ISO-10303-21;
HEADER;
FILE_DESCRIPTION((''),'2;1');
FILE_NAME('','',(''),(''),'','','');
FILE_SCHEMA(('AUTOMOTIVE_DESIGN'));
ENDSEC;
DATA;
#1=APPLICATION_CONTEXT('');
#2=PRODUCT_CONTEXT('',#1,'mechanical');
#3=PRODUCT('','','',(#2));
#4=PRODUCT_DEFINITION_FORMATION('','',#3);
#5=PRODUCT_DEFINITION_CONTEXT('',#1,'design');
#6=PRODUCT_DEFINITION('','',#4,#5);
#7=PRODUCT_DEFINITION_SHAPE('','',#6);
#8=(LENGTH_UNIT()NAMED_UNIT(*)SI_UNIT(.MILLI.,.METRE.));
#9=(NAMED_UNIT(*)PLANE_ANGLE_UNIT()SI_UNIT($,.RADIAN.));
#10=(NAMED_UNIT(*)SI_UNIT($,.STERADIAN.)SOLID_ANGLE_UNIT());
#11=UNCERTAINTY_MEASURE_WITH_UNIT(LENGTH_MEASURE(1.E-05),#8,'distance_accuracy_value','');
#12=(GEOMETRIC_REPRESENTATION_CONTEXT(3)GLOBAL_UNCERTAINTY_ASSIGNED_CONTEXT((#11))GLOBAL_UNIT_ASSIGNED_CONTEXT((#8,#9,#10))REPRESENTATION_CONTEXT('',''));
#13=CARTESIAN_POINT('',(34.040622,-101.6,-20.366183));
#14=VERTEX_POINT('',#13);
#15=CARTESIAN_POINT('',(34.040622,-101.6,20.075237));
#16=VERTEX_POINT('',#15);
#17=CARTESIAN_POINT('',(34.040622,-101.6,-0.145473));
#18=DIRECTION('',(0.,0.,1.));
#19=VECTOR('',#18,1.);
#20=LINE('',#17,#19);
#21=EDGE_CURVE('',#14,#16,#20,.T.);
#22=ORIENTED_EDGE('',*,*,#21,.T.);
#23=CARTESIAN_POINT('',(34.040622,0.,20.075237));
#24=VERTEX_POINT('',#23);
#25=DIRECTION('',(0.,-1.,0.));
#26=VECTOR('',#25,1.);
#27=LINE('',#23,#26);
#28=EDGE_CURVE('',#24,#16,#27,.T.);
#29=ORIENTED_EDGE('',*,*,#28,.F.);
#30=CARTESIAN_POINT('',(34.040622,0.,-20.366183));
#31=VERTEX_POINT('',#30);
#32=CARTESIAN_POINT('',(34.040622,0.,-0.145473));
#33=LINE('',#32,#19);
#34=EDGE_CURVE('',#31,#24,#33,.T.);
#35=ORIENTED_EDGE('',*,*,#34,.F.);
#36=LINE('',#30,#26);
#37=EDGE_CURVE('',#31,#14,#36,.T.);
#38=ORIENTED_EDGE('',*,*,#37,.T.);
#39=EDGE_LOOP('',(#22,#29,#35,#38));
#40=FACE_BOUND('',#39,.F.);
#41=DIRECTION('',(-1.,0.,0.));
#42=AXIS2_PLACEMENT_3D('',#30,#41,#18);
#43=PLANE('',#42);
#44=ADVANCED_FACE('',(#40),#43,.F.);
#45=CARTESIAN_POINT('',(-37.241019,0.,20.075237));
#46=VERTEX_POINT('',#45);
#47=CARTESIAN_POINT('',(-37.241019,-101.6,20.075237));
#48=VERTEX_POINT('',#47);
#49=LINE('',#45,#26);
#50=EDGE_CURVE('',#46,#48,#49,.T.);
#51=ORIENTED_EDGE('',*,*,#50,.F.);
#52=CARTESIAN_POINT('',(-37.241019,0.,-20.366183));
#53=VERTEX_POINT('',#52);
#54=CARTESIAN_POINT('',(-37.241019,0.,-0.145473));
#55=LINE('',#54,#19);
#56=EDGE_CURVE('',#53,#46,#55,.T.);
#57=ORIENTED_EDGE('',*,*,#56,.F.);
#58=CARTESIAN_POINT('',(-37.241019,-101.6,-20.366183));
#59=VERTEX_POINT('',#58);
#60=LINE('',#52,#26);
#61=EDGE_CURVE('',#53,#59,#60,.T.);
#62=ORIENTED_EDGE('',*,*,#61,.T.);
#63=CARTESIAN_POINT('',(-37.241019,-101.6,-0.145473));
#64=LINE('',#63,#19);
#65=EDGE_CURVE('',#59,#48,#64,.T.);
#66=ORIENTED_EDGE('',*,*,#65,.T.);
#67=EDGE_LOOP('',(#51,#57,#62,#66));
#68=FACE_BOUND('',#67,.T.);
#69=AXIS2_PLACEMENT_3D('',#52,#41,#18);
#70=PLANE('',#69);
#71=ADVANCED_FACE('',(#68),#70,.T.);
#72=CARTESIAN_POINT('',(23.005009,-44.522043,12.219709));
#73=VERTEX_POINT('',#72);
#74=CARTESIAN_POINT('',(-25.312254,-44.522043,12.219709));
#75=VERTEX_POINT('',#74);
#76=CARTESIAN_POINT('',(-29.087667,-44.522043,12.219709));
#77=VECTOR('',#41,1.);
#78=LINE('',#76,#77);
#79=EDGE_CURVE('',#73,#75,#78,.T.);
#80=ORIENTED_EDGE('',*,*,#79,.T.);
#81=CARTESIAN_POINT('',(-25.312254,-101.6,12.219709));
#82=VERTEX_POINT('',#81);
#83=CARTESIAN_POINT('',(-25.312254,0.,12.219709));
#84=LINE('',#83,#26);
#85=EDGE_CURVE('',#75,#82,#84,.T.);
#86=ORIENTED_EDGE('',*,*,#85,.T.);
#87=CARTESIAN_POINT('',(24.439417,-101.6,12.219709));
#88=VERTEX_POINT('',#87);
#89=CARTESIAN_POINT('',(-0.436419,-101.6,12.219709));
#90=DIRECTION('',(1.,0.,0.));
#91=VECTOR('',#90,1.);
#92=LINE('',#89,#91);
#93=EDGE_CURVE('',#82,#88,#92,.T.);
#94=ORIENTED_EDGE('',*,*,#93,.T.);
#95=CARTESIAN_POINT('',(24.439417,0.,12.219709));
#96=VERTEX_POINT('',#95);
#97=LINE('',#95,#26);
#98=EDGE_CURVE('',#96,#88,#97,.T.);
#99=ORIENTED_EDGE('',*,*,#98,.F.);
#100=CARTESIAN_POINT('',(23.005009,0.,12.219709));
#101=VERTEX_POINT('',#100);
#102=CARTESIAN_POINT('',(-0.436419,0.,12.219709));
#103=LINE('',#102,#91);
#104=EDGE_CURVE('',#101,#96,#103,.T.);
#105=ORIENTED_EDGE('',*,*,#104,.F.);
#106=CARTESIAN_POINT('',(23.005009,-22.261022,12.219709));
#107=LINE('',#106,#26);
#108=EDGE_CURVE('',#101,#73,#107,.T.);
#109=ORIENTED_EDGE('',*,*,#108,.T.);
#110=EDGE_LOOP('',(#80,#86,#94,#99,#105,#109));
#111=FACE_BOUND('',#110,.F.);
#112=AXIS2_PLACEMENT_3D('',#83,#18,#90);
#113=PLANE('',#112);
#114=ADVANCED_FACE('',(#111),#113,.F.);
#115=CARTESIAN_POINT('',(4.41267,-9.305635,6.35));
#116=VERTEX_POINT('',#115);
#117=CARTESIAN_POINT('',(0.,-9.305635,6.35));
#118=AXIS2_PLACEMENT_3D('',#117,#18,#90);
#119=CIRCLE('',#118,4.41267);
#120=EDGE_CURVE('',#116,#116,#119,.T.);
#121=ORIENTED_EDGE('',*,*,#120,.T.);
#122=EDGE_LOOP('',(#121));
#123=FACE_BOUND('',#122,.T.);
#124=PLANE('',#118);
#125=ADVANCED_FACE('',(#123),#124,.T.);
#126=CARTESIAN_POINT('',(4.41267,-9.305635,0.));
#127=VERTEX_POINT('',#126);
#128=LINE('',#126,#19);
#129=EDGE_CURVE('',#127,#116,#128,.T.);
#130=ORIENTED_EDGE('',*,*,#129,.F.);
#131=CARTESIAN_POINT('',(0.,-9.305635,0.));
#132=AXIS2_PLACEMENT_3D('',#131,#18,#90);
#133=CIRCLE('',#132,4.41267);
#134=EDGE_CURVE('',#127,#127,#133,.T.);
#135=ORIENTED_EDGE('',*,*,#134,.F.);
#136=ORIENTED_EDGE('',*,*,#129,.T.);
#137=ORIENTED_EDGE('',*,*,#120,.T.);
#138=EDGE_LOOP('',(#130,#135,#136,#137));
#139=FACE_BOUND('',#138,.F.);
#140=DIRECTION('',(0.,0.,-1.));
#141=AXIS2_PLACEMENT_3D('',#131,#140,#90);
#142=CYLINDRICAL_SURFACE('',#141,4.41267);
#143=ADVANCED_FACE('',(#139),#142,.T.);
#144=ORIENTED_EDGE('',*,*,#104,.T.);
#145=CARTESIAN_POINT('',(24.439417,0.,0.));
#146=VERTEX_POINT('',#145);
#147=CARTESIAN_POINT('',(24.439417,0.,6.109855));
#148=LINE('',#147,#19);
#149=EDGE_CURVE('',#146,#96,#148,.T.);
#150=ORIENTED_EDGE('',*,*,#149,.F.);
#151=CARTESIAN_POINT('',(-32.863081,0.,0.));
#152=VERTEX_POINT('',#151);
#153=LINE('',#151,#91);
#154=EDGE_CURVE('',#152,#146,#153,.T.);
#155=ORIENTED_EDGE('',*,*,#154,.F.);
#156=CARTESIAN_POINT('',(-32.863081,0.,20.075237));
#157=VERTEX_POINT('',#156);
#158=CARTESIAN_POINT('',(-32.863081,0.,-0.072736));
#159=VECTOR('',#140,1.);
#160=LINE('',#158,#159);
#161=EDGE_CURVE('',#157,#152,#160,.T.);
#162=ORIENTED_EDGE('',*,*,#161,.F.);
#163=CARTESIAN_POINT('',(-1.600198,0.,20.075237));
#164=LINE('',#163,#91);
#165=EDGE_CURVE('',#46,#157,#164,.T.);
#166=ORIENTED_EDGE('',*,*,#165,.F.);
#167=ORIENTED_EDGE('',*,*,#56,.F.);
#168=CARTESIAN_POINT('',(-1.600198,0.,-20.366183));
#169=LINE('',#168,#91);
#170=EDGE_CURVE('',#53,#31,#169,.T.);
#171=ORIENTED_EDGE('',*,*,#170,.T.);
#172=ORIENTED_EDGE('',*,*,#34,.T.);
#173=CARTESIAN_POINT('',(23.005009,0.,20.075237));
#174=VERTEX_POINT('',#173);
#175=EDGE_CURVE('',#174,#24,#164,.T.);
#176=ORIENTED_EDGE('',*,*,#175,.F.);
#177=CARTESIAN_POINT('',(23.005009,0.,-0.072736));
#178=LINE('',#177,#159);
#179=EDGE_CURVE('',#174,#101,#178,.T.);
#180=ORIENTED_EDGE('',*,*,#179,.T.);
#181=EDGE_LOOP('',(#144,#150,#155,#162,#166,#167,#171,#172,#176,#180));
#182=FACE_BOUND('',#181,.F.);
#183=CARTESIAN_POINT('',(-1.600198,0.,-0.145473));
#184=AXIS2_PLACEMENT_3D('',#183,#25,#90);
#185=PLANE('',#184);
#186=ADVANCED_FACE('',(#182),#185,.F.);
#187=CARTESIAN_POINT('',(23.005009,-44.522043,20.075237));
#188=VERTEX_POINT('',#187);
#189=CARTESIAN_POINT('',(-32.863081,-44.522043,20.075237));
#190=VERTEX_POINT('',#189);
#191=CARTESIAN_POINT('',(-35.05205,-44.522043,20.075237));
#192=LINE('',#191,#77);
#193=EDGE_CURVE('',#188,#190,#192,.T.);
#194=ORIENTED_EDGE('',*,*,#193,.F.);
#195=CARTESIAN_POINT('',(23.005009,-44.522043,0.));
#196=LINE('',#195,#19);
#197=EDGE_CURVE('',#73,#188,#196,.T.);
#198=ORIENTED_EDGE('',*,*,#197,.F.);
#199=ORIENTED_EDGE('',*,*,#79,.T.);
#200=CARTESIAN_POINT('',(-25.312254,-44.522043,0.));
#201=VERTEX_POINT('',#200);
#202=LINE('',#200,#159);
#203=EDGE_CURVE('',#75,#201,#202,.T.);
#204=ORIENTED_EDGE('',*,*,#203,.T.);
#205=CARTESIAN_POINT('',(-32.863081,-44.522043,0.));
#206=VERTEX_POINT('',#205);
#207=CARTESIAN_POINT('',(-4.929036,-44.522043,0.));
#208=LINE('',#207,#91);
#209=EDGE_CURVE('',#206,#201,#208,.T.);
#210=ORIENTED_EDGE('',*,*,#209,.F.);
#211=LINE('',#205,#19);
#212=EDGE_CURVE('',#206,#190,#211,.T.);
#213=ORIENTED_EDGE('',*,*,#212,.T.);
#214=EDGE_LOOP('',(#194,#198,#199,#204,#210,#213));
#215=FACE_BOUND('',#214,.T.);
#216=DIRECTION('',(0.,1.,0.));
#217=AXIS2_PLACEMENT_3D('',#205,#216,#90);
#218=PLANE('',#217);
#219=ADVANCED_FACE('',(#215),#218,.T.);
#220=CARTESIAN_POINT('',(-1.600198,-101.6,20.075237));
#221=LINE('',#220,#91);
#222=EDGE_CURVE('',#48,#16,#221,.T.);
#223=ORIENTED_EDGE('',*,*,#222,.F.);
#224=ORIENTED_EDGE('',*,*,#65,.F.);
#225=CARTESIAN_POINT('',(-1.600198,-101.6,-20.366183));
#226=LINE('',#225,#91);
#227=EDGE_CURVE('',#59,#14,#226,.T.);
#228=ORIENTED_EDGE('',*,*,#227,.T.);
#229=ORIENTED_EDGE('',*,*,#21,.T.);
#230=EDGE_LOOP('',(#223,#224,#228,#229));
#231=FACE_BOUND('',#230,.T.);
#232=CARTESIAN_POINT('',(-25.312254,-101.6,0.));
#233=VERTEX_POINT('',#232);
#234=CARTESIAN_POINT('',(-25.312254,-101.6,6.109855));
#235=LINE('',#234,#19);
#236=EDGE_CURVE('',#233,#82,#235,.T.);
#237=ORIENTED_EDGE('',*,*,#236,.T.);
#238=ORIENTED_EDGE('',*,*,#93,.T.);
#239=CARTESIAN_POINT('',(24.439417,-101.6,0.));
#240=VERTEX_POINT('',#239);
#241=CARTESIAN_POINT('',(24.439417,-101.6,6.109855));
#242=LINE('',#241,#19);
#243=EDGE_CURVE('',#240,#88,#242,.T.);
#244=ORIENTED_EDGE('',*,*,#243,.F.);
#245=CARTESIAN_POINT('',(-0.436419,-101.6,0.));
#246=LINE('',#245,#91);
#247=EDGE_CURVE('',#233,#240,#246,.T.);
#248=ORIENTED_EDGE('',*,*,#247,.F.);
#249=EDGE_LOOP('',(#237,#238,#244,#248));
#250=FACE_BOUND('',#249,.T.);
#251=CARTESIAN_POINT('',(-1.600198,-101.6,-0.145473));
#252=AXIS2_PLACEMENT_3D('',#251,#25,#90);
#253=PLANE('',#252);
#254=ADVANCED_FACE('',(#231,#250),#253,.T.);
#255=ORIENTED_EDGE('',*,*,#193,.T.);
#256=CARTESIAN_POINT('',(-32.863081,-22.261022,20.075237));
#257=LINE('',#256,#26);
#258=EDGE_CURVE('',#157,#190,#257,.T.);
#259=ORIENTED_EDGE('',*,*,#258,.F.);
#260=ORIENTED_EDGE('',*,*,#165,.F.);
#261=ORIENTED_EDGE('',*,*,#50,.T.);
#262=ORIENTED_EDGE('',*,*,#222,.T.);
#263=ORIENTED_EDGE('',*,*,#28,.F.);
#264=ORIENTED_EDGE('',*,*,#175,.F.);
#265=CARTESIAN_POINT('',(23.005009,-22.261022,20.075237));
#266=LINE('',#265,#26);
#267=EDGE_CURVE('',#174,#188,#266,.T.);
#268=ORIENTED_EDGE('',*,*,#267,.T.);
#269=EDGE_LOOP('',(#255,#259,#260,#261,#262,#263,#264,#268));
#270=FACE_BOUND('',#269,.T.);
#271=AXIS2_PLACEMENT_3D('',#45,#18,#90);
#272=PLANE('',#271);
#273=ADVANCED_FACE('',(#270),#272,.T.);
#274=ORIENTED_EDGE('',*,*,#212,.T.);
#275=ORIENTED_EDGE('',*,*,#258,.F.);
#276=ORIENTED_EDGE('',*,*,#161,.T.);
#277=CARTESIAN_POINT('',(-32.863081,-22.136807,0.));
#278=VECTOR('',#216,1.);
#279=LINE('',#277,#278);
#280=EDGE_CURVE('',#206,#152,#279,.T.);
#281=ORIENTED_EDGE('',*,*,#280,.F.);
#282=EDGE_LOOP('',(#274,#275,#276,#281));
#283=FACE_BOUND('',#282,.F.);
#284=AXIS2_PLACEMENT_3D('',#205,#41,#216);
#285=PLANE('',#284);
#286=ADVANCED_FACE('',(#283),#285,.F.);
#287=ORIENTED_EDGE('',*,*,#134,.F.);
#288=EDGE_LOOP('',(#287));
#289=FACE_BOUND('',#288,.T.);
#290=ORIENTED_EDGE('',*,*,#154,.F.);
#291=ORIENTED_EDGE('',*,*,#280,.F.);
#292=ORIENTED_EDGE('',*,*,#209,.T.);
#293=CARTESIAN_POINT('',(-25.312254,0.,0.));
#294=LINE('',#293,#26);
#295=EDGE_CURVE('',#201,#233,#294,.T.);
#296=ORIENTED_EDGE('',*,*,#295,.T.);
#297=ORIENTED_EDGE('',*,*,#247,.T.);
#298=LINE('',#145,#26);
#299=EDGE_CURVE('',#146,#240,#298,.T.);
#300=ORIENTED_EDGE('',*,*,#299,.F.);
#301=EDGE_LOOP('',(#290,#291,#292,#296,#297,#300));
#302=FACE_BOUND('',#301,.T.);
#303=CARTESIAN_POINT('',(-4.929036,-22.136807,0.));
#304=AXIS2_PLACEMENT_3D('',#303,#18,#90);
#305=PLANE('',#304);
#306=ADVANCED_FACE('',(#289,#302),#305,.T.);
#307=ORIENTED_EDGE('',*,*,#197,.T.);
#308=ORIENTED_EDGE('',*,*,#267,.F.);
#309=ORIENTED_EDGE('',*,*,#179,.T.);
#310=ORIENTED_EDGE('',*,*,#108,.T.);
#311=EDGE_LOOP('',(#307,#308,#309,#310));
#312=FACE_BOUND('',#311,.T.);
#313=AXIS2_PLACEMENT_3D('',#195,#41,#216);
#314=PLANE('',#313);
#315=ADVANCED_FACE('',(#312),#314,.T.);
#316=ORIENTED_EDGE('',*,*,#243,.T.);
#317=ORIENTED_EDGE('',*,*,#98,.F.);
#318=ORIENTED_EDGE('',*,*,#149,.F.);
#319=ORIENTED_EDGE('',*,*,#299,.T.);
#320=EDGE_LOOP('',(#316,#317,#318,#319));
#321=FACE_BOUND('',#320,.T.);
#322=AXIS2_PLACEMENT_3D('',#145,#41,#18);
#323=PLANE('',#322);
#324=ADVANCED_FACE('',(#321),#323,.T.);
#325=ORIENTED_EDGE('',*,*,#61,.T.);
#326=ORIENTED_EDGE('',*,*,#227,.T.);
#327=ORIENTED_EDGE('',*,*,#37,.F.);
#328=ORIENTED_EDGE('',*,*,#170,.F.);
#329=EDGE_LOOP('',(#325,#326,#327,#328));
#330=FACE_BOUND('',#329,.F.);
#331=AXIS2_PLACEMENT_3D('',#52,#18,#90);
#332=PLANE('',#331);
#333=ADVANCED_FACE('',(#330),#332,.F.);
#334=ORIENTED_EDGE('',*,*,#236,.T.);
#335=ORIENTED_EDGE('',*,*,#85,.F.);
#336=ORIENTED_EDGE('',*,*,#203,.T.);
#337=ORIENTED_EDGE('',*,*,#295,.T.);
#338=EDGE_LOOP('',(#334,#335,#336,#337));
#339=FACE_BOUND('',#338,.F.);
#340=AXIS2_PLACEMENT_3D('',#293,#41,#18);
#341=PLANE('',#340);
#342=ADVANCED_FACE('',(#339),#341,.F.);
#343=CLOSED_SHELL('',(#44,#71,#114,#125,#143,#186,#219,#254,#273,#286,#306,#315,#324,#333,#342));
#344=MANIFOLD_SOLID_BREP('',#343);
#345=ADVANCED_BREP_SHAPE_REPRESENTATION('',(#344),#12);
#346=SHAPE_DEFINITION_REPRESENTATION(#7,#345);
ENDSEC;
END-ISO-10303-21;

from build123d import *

# Parameters (mm, degrees)
F0_W     = 71.2816417217
F0_H     = 40.4414199293
F2_DEPTH = 101.6
F1_W     = 49.7516710311
F1_H     = 12.2197093442
F3_DEPTH = 101.6
F4_R     = 4.4126696885
F5_DEPTH = 6.35
F6_W     = 55.8680891991
F6_H     = 44.7704729486
F7_DEPTH = 101.6
F8_DEPTH = 6.35


with BuildPart() as f2:
    # F0 (on Front) → F2 (new body)
    with BuildSketch(Plane.XZ):
        with Locations((-1.6001984477, -0.1454725862)):
            Rectangle(F0_W, F0_H)
    extrude(amount=F2_DEPTH)

    # F1 (on Front) → F3 (cut)
    with BuildSketch(Plane.XZ):
        with Locations((-0.4364186898, 6.1098546721)):
            Rectangle(F1_W, F1_H)
    extrude(amount=F3_DEPTH, mode=Mode.SUBTRACT)

    # F4 (on Top) → F5 (join)
    with BuildSketch(Plane.XY):
        with Locations((0, -9.3056354672)):
            Circle(F4_R)
    extrude(amount=F5_DEPTH)

    # F6 (on Top) → F7 (cut)
    with BuildSketch(Plane.XY):
        with Locations((-4.929035902, -22.1368068433)):
            Rectangle(F6_W, F6_H)
    extrude(amount=F7_DEPTH, mode=Mode.SUBTRACT)

    # F4 (on Top) → F8 (join)
    with BuildSketch(Plane.XY):
        with Locations((0, -9.3056354672)):
            Circle(F4_R)
    extrude(amount=F8_DEPTH)


solid = f2.part
